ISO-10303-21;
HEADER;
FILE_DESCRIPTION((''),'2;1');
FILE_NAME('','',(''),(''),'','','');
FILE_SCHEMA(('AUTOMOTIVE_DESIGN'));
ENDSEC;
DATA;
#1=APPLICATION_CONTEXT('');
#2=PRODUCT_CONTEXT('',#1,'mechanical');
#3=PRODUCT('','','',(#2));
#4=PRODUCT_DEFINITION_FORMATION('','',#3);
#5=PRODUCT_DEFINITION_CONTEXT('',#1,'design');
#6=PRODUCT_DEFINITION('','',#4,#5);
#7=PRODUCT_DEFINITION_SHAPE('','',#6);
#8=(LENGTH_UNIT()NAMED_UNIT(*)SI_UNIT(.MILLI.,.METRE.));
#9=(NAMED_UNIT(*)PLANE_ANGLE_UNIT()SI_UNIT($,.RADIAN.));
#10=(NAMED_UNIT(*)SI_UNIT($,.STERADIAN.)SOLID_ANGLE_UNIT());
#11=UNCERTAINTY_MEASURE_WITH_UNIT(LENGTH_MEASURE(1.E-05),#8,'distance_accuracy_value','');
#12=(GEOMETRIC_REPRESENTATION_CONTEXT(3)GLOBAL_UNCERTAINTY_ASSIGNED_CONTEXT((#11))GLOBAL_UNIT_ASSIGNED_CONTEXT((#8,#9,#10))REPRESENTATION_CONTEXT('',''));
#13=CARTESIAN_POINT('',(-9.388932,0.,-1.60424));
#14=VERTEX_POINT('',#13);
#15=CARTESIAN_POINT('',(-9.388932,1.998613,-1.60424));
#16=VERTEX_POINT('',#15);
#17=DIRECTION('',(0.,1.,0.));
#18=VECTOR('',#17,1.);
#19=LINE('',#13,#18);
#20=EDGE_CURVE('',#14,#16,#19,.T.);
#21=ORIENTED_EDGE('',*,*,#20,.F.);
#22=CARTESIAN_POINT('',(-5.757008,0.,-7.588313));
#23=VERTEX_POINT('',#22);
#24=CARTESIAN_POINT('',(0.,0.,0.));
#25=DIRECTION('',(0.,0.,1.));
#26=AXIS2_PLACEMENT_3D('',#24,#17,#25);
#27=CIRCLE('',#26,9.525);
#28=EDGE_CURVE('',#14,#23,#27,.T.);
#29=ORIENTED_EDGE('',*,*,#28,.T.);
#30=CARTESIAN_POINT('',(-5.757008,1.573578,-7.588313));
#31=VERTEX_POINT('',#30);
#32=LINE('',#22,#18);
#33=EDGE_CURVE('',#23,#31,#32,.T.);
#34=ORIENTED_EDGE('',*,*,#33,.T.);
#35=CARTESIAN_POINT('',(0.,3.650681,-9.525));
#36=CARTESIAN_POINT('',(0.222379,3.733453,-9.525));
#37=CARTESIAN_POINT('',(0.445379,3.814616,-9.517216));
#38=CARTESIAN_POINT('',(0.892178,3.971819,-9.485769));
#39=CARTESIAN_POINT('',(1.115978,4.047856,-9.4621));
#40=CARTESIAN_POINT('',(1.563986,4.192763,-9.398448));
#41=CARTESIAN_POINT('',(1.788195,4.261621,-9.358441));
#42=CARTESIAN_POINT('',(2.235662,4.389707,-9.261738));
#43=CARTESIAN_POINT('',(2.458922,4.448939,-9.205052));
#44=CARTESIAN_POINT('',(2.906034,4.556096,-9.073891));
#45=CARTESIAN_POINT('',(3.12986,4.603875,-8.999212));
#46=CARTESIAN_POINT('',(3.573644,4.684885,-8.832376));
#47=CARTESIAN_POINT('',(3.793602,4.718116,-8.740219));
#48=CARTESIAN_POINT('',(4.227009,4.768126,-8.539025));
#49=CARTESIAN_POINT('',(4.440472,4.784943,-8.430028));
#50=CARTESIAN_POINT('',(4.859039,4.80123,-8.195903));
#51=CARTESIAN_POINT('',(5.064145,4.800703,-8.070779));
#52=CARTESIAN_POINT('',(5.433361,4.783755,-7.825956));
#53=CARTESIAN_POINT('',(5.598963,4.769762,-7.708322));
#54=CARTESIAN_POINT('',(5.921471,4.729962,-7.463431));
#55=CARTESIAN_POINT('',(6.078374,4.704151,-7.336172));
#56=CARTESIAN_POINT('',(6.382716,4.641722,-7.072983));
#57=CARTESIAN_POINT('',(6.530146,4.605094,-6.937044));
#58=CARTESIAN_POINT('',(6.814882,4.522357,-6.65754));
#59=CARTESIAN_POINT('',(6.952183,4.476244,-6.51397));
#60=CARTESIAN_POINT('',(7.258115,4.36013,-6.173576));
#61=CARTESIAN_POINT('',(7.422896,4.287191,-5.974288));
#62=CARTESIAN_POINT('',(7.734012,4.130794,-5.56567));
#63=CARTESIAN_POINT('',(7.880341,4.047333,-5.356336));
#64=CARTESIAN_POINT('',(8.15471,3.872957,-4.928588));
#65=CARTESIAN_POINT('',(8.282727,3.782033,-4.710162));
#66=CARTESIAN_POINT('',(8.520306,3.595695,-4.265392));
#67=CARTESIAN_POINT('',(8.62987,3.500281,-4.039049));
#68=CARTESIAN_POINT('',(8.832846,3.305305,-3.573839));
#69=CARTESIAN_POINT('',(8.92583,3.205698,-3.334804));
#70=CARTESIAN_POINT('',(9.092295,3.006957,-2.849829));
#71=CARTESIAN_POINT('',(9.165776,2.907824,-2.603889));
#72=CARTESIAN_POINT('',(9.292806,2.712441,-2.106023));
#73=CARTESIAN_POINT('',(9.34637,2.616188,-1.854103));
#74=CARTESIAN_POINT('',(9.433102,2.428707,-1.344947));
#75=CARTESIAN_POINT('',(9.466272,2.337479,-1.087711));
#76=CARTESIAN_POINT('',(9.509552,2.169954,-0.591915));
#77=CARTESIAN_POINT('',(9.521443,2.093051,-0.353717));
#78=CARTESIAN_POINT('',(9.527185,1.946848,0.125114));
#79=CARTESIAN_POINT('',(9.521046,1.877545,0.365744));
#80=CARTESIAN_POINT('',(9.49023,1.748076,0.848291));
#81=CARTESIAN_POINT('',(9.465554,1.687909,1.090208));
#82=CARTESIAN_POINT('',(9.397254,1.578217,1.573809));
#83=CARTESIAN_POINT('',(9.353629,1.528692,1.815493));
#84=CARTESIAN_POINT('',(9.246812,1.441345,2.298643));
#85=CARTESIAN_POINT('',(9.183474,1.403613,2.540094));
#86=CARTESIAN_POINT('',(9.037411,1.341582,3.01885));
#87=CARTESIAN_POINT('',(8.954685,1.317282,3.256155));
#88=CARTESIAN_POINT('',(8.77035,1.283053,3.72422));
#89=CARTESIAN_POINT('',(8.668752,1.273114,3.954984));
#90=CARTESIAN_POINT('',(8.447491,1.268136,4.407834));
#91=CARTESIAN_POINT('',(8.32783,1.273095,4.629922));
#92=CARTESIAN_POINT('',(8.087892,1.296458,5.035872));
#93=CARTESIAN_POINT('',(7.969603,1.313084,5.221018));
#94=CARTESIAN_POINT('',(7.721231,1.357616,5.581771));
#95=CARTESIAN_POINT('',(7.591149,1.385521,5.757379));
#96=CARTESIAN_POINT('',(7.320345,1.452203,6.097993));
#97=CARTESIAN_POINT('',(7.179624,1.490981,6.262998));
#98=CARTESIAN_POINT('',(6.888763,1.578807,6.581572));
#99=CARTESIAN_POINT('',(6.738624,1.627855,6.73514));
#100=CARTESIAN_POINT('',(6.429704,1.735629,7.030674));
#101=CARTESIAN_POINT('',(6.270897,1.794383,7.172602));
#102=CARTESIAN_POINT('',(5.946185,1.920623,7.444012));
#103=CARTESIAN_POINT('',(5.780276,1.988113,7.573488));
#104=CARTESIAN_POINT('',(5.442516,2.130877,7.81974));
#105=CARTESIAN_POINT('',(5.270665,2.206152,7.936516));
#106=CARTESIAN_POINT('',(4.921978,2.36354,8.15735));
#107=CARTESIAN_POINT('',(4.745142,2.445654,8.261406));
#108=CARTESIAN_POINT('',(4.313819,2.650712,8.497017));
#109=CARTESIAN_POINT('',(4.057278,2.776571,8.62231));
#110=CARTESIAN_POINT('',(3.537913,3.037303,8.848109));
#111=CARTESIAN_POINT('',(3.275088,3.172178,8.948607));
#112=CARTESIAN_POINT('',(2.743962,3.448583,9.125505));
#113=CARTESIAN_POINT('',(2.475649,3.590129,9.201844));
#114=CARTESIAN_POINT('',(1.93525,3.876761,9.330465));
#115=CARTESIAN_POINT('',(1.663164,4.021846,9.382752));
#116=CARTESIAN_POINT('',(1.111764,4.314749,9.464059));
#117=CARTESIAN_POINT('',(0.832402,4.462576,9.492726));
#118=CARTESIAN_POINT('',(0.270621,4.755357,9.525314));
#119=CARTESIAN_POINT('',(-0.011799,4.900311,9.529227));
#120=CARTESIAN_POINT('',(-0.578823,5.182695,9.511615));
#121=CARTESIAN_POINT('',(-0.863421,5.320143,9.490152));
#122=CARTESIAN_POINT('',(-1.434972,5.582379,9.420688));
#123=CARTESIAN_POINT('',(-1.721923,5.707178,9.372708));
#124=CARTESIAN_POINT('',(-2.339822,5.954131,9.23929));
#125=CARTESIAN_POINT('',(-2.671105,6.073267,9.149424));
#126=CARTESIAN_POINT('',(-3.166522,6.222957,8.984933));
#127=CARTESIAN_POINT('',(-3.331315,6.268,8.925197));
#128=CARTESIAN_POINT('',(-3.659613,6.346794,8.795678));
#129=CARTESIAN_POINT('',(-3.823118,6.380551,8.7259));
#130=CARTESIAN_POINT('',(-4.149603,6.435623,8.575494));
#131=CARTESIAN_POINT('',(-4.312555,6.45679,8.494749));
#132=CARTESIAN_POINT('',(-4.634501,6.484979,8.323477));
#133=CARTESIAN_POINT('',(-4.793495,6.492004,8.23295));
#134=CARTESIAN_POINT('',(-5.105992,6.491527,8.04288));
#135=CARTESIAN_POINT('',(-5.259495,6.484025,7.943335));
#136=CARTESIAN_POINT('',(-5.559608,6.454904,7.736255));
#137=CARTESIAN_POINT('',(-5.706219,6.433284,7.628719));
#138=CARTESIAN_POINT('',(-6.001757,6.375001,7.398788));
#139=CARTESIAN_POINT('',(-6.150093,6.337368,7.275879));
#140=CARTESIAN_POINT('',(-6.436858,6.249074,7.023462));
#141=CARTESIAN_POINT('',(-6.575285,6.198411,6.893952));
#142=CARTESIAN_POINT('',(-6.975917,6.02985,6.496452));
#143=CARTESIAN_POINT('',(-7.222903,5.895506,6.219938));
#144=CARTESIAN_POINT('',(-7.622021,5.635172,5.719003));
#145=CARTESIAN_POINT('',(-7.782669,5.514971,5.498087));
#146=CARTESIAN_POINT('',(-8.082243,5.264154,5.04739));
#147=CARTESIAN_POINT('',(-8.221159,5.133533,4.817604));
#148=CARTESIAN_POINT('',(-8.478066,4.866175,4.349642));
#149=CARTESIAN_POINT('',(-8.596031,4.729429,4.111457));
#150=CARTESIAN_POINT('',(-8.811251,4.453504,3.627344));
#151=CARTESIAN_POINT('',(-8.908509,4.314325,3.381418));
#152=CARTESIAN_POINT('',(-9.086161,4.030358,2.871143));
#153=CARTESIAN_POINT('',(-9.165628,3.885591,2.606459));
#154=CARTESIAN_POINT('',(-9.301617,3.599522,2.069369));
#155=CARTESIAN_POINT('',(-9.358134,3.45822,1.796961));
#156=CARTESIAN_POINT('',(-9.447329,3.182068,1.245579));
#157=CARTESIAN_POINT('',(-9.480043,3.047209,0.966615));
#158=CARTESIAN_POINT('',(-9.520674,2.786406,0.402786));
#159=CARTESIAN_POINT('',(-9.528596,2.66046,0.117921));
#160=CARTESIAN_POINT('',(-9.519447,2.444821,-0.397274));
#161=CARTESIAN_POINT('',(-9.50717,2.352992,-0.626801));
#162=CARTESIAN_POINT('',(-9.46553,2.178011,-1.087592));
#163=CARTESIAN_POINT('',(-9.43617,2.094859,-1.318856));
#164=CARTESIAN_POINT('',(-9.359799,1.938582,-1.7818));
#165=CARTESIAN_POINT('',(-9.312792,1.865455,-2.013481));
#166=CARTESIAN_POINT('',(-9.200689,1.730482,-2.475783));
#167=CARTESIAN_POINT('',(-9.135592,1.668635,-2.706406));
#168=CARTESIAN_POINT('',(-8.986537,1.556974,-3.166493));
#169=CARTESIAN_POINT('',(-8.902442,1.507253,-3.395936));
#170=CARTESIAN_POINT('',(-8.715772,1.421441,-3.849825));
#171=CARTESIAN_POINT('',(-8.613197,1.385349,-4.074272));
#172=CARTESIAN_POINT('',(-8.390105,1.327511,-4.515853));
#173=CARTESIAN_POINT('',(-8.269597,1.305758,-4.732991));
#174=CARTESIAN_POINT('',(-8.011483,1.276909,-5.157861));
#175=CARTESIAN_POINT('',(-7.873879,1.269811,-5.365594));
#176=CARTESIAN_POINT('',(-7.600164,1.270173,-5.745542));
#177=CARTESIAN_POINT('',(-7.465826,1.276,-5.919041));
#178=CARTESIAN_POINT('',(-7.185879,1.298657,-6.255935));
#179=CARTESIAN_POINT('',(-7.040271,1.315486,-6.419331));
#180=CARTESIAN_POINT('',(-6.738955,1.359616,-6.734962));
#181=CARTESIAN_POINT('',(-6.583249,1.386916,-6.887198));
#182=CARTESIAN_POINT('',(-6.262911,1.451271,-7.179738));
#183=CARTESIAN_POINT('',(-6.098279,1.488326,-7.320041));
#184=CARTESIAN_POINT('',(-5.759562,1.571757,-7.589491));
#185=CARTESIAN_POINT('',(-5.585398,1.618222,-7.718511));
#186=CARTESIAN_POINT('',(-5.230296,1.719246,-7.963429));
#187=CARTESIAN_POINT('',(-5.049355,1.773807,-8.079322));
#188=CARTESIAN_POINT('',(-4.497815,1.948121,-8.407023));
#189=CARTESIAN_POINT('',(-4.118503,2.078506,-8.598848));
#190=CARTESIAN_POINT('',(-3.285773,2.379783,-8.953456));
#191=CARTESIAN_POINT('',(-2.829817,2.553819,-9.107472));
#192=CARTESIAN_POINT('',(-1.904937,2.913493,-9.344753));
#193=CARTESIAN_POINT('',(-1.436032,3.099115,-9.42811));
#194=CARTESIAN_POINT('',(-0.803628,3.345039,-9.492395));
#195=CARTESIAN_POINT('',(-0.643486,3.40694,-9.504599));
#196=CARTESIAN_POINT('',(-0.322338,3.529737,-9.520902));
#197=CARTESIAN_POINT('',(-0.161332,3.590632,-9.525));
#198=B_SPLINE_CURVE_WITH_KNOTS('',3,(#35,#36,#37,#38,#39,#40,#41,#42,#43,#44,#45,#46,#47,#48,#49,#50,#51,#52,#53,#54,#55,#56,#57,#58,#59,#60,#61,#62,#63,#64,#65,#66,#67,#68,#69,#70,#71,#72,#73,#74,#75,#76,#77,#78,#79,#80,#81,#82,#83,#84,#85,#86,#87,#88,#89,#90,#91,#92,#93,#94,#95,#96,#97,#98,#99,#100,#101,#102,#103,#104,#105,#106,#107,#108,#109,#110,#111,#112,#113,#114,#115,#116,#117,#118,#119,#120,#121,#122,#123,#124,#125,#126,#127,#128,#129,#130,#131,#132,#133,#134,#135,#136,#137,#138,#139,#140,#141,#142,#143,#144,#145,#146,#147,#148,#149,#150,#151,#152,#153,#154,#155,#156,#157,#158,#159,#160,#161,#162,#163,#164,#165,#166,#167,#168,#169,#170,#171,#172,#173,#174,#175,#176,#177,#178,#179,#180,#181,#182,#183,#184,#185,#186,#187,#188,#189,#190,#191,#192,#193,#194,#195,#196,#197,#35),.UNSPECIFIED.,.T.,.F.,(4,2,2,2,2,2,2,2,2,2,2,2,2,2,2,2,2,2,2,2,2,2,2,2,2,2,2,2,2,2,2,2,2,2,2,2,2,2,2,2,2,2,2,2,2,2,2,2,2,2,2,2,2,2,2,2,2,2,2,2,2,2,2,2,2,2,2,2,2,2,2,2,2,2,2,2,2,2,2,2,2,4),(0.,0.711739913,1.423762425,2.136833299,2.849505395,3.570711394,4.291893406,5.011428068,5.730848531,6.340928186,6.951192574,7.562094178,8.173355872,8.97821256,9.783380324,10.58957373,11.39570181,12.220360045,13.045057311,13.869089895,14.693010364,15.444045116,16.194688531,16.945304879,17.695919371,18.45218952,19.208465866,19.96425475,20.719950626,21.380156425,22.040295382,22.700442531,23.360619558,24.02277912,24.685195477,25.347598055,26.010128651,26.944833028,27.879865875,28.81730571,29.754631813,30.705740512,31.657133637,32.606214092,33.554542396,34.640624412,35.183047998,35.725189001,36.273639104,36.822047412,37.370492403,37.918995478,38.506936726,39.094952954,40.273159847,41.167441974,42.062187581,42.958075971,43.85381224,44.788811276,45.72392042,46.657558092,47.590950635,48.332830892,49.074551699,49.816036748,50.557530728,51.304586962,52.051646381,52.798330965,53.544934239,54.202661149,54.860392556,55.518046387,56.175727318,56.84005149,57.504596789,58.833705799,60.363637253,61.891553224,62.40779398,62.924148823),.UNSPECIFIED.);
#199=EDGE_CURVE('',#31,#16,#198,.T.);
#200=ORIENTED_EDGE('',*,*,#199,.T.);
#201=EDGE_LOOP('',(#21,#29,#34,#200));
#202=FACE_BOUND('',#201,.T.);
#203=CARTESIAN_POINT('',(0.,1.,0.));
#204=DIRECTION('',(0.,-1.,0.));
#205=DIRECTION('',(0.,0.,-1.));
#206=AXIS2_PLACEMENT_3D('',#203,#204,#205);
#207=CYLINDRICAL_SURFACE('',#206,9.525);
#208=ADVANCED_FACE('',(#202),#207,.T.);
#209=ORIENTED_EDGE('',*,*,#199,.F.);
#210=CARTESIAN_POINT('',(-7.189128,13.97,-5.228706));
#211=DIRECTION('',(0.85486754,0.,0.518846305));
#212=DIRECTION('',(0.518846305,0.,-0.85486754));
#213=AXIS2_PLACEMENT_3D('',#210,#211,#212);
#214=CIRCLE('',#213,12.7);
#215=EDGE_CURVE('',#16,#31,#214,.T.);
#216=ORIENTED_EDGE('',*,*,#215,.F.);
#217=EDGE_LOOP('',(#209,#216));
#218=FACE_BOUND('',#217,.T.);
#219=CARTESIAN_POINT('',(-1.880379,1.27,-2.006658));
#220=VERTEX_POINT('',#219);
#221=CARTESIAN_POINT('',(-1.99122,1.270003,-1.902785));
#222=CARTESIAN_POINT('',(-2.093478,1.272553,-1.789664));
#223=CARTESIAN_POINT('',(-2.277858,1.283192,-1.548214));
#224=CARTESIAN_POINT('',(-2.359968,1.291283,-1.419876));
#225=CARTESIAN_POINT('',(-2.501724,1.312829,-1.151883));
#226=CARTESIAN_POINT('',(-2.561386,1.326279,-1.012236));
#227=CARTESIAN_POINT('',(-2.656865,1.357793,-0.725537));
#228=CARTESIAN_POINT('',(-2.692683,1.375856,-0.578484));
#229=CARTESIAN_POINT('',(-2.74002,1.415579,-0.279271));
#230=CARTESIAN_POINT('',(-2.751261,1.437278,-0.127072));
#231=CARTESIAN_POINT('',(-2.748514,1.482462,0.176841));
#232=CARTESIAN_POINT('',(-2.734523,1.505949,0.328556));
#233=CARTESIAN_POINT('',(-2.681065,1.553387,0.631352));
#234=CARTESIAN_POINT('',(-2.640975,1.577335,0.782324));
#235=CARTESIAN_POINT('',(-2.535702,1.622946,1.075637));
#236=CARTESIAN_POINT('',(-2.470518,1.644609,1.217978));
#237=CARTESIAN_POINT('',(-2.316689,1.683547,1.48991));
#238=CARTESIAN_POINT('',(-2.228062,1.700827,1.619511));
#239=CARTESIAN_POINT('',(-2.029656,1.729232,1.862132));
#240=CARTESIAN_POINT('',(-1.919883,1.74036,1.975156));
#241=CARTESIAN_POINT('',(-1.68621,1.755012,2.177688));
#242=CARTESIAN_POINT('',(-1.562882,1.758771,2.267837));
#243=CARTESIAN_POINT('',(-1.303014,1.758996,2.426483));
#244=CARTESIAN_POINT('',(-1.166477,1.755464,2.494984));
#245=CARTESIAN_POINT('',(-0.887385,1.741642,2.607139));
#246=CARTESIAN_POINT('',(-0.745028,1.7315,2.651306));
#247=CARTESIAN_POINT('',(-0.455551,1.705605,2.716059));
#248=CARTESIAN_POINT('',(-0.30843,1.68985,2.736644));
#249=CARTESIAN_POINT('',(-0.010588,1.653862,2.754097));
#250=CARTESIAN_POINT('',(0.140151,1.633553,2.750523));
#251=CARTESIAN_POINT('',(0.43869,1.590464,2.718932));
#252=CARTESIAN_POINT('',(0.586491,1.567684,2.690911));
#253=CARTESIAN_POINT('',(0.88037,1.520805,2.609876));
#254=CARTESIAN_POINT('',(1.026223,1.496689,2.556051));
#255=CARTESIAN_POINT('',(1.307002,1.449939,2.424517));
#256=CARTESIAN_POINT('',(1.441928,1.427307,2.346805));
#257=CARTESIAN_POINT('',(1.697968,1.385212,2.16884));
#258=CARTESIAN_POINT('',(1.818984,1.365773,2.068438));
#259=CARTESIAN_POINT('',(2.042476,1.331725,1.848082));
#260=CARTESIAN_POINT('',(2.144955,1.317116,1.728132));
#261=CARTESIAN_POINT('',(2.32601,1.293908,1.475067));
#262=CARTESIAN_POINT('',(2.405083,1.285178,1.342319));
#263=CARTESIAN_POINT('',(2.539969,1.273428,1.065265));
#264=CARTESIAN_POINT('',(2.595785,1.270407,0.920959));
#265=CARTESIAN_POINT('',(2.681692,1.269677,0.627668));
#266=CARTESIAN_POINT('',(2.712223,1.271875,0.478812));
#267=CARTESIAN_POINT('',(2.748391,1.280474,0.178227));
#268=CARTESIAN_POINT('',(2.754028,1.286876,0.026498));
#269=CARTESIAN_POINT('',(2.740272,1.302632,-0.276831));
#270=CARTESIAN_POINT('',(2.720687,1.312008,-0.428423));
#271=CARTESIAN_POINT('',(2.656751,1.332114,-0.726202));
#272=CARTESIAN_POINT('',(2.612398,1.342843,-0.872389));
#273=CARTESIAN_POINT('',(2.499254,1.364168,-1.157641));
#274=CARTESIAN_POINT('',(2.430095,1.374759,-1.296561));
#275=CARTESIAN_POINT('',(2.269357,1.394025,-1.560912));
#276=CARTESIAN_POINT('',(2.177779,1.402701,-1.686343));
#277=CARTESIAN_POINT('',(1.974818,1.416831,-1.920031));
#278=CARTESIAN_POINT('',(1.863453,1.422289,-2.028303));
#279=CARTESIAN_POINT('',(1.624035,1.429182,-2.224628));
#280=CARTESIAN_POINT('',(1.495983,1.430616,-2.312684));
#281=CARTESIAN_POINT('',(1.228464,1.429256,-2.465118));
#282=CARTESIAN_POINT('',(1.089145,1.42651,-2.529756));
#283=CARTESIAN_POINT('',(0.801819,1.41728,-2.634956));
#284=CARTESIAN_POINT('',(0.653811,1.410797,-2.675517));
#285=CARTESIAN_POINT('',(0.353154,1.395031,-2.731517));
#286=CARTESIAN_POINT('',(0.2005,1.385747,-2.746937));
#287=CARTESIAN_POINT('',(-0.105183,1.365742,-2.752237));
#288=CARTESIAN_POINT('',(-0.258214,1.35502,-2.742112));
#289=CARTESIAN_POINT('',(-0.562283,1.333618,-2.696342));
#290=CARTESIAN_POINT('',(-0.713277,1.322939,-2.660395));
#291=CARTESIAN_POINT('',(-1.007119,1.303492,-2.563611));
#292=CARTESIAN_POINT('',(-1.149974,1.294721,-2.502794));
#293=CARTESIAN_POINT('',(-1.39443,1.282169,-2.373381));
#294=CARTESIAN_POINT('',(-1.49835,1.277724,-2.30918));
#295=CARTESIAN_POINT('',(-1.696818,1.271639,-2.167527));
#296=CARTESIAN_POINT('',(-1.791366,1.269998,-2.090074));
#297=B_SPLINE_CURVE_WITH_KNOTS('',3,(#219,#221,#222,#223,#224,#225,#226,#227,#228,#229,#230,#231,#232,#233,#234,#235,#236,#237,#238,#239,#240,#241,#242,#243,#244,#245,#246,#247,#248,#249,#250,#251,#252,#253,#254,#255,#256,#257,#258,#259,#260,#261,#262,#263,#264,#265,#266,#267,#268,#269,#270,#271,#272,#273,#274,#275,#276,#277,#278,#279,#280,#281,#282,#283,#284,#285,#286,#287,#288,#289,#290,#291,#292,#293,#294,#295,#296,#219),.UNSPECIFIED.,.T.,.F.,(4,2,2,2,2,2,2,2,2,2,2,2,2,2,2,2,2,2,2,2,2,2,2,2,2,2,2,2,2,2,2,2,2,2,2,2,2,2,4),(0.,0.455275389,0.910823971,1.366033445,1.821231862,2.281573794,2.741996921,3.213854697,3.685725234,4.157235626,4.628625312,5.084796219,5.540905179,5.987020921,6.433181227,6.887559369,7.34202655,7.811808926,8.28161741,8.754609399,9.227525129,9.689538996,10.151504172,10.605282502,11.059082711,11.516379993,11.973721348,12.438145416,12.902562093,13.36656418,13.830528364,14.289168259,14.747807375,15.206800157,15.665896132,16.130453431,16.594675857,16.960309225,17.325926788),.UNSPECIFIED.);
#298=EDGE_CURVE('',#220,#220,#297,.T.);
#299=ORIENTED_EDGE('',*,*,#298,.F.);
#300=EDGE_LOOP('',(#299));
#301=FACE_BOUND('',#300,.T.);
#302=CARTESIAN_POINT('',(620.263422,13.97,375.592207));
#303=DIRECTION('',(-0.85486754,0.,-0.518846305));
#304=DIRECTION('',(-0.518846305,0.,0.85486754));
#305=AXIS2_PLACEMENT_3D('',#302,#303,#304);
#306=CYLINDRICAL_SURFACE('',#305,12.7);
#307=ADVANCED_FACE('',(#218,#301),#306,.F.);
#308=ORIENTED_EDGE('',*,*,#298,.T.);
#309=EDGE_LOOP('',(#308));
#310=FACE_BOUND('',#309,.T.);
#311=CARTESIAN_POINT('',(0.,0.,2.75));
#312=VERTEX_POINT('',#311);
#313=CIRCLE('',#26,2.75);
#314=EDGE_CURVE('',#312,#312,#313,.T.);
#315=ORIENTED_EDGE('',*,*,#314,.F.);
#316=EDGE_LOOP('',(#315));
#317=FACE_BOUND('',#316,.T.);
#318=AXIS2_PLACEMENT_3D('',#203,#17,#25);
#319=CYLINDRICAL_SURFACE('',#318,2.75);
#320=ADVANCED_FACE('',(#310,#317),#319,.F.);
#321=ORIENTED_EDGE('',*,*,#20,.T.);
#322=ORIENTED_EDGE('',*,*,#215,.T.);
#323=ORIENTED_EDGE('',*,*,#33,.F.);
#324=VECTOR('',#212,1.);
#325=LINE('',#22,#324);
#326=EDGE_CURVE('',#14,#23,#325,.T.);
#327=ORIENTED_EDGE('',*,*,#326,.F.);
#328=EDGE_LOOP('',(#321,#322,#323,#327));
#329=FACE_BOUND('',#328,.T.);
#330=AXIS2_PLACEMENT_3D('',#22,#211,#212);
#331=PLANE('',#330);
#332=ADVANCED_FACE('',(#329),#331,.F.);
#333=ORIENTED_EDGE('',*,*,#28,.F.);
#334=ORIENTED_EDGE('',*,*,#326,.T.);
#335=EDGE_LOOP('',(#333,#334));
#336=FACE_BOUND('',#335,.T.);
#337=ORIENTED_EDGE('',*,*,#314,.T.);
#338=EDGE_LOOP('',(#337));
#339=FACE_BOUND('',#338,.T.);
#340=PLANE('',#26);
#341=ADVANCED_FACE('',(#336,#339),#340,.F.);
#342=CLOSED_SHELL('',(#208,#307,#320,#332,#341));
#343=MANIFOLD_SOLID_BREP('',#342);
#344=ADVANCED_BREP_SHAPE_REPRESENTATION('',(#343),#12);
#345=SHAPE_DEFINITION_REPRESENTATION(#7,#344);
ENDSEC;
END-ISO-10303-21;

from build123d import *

# Parameters (mm, degrees)
SKETCH2_R                   = 9.525
BOSS_EXTRUDE1_DEPTH         = 1
M5_CLEARANCE_HOLE1_D        = 5.5
BOSS_EXTRUDE2_START         = -1.269999898
BOSS_EXTRUDE2_OUTLINE_R     = 9.525
BOSS_EXTRUDE2_OUTLINE_R_2   = 2.75
BOSS_EXTRUDE2_DEPTH         = 0.269999898
BOSS_EXTRUDE2_START_2       = 1.269999898
BOSS_EXTRUDE2_2_OUTLINE_R   = 9.525
BOSS_EXTRUDE2_2_OUTLINE_R_2 = 2.75
BOSS_EXTRUDE2_2_DEPTH       = 5.2217713
BOSS_EXTRUDE2_START_3       = -11
BOSS_EXTRUDE2_3_DEPTH       = 22
CUT_EXTRUDE1_DEPTH          = 15.546848663
CUT_EXTRUDE1_DEPTH_BACK     = 15.546848663


with BuildPart() as part:
    # Sketch2 → Boss-Extrude1 (new body)
    with BuildSketch(Plane(origin=(0, 0, 0), x_dir=(1, 0, 0), z_dir=(0, 1, 0))):
        with Locations(Location((0, 0, 0), (0, 0, 270))):
            Circle(SKETCH2_R)
    extrude(amount=BOSS_EXTRUDE1_DEPTH)

    # M5 Clearance Hole1 (through all)
    with Locations(Plane(origin=(0, 1, 0), x_dir=(1, 0, 0), z_dir=(0, 1, 0))):
        with Locations((0, 0)):
            Hole(M5_CLEARANCE_HOLE1_D / 2)

    # Boss-Extrude2: read off the stored shape, not the designer's step
    # Boss-Extrude2 outline → Boss-Extrude2 (add)
    with BuildSketch(Plane.XZ.offset(BOSS_EXTRUDE2_START)):
        Circle(BOSS_EXTRUDE2_OUTLINE_R)
        Circle(BOSS_EXTRUDE2_OUTLINE_R_2, mode=Mode.SUBTRACT)
    extrude(amount=BOSS_EXTRUDE2_DEPTH)

    # Boss-Extrude2 2 outline → Boss-Extrude2 2 (add)
    with BuildSketch(Plane(origin=(0, 0, 0), x_dir=(1, 0, 0), z_dir=(0, 1, 0)).offset(BOSS_EXTRUDE2_START_2)):
        Circle(BOSS_EXTRUDE2_2_OUTLINE_R)
        Circle(BOSS_EXTRUDE2_2_OUTLINE_R_2, mode=Mode.SUBTRACT)
    extrude(amount=BOSS_EXTRUDE2_2_DEPTH)

    # Boss-Extrude2 3 outline → Boss-Extrude2 3 (cut)
    with BuildSketch(Plane(origin=(0, 0, 0), x_dir=(0.51884630524159, 0, -0.8548675403459595), z_dir=(0.8548675403459595, 0, 0.5188463052415904)).offset(BOSS_EXTRUDE2_START_3)):
        with BuildLine():
            ThreePointArc((-9.525000037, 6.491771171), (-0.383965362, 1.319816038), (9.525621352, 4.799431821))
            Line((9.525621352, 4.799431821), (11, 6.211953819))
            Line((11, 6.211953819), (11, 6.491771198))
            Line((11, 6.491771198), (-9.525000037, 6.491771171))
        make_face()
    extrude(amount=BOSS_EXTRUDE2_3_DEPTH, mode=Mode.SUBTRACT)

    # Sketch7 → Cut-Extrude1 (cut, two sides: drawn at the far end of the back side and taken through both)
    with BuildSketch(Plane(origin=(0, 1, 0), x_dir=(1, 0, 0), z_dir=(0, 1, 0)).offset(-CUT_EXTRUDE1_DEPTH_BACK)):
        Polygon((-5.757007623, 7.588312608), (-9.388931759, 1.604239825), (-9.95857539, 1.949974666), (-6.326651253, 7.934047449), align=None)
    extrude(amount=CUT_EXTRUDE1_DEPTH + CUT_EXTRUDE1_DEPTH_BACK, mode=Mode.SUBTRACT)


solid = part.part
